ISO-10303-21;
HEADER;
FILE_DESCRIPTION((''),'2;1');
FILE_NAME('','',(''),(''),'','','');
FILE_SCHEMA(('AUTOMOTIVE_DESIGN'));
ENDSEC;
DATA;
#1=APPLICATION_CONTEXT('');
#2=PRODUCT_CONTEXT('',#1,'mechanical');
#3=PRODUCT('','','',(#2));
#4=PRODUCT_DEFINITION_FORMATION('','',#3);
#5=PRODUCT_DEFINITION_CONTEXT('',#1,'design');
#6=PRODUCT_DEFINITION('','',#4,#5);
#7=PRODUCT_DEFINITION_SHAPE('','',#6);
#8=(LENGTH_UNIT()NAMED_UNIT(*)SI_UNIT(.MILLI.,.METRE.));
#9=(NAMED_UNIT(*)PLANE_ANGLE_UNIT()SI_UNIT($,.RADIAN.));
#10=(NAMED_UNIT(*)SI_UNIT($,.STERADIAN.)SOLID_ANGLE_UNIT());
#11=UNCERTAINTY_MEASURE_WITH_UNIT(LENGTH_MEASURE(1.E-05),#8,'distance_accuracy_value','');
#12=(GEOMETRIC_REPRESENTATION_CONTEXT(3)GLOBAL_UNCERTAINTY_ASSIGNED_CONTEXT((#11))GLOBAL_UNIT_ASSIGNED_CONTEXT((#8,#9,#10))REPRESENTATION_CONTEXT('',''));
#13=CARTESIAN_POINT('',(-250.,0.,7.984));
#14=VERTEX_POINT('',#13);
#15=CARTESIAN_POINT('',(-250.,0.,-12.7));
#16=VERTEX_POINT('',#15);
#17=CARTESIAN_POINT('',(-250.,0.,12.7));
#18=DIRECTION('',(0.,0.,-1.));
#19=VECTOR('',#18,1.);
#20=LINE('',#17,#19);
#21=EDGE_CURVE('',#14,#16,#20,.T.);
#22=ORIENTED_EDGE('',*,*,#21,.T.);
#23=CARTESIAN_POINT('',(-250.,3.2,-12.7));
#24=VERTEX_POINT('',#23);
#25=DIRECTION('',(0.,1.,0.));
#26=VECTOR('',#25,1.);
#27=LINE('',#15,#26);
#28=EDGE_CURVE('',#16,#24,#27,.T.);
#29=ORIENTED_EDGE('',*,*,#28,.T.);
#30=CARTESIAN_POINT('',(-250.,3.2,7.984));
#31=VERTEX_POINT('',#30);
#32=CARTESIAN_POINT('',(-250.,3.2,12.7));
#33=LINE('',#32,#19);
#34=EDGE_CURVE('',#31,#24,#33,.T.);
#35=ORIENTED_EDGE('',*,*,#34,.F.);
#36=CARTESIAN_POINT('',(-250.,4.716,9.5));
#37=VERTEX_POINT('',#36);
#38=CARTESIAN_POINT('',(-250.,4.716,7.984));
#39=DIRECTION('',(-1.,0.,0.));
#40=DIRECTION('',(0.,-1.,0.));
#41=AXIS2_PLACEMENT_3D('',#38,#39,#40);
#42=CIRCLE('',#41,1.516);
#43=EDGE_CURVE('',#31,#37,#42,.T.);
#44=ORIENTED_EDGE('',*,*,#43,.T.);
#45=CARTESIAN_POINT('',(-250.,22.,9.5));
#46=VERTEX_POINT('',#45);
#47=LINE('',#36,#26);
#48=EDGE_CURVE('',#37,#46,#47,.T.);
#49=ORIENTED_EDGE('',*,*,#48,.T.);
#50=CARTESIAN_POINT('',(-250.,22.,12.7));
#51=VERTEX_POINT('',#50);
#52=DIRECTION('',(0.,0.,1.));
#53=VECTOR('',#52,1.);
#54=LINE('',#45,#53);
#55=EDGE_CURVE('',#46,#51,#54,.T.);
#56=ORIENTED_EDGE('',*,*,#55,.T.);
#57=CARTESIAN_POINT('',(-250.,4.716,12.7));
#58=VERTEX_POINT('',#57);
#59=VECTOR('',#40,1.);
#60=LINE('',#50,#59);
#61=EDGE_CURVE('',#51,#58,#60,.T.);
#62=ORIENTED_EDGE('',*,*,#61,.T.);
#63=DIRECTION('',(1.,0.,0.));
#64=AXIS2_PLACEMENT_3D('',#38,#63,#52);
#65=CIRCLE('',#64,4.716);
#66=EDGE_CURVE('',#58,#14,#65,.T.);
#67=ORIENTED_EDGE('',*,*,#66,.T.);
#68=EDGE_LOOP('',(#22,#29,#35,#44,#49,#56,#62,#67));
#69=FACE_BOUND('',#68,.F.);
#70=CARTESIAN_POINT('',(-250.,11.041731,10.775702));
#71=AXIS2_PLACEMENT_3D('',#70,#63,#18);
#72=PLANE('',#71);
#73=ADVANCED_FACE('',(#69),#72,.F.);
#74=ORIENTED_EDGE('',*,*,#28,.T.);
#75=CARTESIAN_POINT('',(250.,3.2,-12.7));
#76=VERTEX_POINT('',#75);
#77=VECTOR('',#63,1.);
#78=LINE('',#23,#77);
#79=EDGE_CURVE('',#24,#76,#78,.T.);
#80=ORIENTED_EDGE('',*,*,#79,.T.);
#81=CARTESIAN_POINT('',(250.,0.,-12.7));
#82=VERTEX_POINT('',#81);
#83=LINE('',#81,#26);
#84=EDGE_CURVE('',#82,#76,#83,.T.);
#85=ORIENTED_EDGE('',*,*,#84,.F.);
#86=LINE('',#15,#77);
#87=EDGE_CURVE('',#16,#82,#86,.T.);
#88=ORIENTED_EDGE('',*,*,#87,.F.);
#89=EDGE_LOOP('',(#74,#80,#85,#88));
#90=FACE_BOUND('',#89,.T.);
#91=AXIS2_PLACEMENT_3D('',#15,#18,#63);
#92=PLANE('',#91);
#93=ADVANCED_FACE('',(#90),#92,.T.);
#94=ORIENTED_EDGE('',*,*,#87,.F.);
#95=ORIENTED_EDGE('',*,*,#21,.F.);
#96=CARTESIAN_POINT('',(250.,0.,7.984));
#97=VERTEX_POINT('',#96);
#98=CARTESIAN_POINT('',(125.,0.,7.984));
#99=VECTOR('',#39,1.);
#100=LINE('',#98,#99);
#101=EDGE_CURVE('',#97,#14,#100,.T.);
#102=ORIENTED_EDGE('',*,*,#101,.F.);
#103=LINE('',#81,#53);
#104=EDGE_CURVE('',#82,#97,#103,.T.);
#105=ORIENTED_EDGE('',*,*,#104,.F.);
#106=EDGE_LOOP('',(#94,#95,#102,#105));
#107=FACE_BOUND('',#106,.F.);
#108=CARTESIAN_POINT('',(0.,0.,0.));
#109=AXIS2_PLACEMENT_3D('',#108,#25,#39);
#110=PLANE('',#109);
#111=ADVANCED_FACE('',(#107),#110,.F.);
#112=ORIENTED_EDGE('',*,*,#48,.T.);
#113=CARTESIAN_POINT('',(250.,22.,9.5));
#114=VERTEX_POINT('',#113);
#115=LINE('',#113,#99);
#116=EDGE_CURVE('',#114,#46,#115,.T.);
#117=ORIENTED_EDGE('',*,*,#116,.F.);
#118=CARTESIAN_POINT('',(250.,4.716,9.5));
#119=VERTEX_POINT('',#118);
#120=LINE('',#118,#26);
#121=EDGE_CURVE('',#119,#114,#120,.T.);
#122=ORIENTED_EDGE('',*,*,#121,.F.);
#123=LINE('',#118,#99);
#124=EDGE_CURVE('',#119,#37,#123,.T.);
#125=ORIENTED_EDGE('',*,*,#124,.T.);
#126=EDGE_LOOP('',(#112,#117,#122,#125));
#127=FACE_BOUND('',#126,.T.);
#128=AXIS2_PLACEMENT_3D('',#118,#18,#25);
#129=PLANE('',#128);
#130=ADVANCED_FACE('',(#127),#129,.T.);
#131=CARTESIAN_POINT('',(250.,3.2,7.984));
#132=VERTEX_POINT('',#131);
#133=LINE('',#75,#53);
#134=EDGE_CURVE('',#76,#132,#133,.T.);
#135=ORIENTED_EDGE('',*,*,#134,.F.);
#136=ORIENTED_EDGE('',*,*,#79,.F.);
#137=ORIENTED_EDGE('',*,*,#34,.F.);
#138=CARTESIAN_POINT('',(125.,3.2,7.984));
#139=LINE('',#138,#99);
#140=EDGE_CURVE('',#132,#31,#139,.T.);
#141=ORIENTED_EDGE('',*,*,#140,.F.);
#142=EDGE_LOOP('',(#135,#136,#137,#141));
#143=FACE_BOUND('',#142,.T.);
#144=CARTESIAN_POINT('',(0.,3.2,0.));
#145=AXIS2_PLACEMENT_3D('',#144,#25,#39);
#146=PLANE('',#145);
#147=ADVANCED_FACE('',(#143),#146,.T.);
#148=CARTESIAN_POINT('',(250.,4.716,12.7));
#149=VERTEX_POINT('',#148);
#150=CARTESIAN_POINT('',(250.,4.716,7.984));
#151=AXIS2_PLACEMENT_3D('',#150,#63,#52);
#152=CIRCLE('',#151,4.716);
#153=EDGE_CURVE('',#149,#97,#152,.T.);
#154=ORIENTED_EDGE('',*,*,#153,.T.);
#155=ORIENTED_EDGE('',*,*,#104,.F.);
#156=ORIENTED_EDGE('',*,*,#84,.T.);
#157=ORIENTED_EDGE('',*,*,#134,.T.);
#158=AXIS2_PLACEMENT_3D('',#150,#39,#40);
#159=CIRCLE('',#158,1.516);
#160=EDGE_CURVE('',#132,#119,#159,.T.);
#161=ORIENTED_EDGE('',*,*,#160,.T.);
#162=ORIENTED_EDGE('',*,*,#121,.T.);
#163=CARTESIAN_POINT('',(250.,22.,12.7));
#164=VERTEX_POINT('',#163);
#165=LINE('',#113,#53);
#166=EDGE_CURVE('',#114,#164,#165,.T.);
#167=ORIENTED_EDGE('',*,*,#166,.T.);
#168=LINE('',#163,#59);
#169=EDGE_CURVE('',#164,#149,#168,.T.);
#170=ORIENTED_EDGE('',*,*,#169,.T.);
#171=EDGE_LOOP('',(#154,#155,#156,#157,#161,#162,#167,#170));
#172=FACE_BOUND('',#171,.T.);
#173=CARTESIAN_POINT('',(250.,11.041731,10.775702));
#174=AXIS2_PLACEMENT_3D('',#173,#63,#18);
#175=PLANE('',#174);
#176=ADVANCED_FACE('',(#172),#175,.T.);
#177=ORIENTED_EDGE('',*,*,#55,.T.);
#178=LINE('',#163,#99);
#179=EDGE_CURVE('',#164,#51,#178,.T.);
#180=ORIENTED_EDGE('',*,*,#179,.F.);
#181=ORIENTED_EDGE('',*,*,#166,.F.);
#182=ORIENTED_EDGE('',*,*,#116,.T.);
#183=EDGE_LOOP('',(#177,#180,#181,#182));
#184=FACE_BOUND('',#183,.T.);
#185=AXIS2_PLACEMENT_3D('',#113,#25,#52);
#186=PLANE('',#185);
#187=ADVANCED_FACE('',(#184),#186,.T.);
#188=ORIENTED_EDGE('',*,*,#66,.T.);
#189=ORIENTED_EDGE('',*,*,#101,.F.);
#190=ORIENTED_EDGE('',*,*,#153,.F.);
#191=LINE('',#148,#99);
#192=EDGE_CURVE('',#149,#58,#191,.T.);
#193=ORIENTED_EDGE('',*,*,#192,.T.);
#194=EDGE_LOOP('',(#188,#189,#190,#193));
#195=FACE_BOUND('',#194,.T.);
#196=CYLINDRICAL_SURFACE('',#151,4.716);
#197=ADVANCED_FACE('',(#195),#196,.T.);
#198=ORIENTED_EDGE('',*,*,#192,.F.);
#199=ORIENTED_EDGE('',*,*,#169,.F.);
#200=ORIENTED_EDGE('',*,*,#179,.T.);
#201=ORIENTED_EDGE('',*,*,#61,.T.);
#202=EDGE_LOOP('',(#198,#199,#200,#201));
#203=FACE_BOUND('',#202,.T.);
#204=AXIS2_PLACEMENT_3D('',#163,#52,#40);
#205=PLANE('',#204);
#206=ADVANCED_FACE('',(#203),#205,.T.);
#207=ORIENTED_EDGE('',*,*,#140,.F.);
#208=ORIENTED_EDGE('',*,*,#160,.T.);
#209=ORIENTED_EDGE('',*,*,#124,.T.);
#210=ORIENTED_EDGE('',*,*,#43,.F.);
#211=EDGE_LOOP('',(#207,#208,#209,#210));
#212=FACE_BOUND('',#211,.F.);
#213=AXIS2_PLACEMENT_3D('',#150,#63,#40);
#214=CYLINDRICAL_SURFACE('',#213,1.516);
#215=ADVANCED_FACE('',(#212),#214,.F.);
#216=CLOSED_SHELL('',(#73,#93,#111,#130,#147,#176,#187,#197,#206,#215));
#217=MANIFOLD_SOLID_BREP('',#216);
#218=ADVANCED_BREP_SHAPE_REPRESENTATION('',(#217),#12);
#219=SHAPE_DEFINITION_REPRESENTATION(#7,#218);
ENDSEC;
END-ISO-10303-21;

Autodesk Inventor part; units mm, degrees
ref_plane "YZ Plane" through (0, 0, 0) normal (1, 0, 0) x (0, 1, 0)
ref_plane "XZ Plane" through (0, 0, 0) normal (0, 1, 0) x (-1, 0, 0)
ref_plane "XY Plane" through (0, 0, 0) normal (0, 0, 1) x (1, 0, 0)
sketch "Sketch1" plane through (0, 0, 0) normal (0, 1, 0) x (-1, 0, 0)
  line L0 (-250, 12.7) -> (250, 12.7)
  line L1 (250, 12.7) -> (250, -12.7)
  line L2 (250, -12.7) -> (-250, -12.7)
  line L3 (-250, -12.7) -> (-250, 12.7)
  line L4 (-250, 12.7) -> (250, -12.7) construction
  line L5 (250, 12.7) -> (-250, -12.7) construction
  point P0 (0, 0)
  dimension "d0" = 500
  dimension "d1" = 25.4
extrude "Plate1" add sketch "Sketch1" along normal blind 3.2
sketch "Sketch2" plane through (250, 0, 9.5) normal (0, 0, 1) x (1, 0, 0)
  line L0 (-500, 0) -> (0, 0)
  line L1 (0, 0) -> (0, 22)
  line L2 (0, 22) -> (-500, 22)
  line L3 (-500, 22) -> (-500, 0)
edge flange "Flange1" height 22 angle 90 thickness 3.2 bend radius 1.516 thickness toward (0, 0, 1) relief tear relief width 3.2 relief depth 1.6 edges at (0, 3.2, 12.7) wall of the first edge with corners at (-250, 0, 9.5) (250, 0, 9.5) (250, 22, 9.5) (-250, 22, 9.5)
bend "Bend1"
corner "Corner1"
equation "\"d2\" = Thickness"
equation "\"d3\" = BendReliefWidth"
equation "\"d4\" = BendReliefDepth"
equation "\"d5\" = MinimumRemnant"
equation "\"d6\" = TransitionRadius"
equation "\"d9\" = BendRadius"
equation "\"d10\" = CornerReliefSize"
equation "\"d11\" = GapSize"
equation "\"d12\" = JacobiRadiusSize"
equation "\"BendReliefWidth\" = Thickness"
equation "\"BendReliefDepth\" = 0.5 * Thickness"
equation "\"CornerReliefSize\" = 4 * Thickness"
equation "\"MinimumRemnant\" = 2 * Thickness"
equation "\"TransitionRadius\" = BendRadius"
equation "\"JacobiRadiusSize\" = BendRadius"
equation "\"GapSize\" = Thickness"
equation "\"Thickness\" = 3.2"
equation "\"BendRadius\" = 1.516"
properties part number "SP33V1 Tope Base"
